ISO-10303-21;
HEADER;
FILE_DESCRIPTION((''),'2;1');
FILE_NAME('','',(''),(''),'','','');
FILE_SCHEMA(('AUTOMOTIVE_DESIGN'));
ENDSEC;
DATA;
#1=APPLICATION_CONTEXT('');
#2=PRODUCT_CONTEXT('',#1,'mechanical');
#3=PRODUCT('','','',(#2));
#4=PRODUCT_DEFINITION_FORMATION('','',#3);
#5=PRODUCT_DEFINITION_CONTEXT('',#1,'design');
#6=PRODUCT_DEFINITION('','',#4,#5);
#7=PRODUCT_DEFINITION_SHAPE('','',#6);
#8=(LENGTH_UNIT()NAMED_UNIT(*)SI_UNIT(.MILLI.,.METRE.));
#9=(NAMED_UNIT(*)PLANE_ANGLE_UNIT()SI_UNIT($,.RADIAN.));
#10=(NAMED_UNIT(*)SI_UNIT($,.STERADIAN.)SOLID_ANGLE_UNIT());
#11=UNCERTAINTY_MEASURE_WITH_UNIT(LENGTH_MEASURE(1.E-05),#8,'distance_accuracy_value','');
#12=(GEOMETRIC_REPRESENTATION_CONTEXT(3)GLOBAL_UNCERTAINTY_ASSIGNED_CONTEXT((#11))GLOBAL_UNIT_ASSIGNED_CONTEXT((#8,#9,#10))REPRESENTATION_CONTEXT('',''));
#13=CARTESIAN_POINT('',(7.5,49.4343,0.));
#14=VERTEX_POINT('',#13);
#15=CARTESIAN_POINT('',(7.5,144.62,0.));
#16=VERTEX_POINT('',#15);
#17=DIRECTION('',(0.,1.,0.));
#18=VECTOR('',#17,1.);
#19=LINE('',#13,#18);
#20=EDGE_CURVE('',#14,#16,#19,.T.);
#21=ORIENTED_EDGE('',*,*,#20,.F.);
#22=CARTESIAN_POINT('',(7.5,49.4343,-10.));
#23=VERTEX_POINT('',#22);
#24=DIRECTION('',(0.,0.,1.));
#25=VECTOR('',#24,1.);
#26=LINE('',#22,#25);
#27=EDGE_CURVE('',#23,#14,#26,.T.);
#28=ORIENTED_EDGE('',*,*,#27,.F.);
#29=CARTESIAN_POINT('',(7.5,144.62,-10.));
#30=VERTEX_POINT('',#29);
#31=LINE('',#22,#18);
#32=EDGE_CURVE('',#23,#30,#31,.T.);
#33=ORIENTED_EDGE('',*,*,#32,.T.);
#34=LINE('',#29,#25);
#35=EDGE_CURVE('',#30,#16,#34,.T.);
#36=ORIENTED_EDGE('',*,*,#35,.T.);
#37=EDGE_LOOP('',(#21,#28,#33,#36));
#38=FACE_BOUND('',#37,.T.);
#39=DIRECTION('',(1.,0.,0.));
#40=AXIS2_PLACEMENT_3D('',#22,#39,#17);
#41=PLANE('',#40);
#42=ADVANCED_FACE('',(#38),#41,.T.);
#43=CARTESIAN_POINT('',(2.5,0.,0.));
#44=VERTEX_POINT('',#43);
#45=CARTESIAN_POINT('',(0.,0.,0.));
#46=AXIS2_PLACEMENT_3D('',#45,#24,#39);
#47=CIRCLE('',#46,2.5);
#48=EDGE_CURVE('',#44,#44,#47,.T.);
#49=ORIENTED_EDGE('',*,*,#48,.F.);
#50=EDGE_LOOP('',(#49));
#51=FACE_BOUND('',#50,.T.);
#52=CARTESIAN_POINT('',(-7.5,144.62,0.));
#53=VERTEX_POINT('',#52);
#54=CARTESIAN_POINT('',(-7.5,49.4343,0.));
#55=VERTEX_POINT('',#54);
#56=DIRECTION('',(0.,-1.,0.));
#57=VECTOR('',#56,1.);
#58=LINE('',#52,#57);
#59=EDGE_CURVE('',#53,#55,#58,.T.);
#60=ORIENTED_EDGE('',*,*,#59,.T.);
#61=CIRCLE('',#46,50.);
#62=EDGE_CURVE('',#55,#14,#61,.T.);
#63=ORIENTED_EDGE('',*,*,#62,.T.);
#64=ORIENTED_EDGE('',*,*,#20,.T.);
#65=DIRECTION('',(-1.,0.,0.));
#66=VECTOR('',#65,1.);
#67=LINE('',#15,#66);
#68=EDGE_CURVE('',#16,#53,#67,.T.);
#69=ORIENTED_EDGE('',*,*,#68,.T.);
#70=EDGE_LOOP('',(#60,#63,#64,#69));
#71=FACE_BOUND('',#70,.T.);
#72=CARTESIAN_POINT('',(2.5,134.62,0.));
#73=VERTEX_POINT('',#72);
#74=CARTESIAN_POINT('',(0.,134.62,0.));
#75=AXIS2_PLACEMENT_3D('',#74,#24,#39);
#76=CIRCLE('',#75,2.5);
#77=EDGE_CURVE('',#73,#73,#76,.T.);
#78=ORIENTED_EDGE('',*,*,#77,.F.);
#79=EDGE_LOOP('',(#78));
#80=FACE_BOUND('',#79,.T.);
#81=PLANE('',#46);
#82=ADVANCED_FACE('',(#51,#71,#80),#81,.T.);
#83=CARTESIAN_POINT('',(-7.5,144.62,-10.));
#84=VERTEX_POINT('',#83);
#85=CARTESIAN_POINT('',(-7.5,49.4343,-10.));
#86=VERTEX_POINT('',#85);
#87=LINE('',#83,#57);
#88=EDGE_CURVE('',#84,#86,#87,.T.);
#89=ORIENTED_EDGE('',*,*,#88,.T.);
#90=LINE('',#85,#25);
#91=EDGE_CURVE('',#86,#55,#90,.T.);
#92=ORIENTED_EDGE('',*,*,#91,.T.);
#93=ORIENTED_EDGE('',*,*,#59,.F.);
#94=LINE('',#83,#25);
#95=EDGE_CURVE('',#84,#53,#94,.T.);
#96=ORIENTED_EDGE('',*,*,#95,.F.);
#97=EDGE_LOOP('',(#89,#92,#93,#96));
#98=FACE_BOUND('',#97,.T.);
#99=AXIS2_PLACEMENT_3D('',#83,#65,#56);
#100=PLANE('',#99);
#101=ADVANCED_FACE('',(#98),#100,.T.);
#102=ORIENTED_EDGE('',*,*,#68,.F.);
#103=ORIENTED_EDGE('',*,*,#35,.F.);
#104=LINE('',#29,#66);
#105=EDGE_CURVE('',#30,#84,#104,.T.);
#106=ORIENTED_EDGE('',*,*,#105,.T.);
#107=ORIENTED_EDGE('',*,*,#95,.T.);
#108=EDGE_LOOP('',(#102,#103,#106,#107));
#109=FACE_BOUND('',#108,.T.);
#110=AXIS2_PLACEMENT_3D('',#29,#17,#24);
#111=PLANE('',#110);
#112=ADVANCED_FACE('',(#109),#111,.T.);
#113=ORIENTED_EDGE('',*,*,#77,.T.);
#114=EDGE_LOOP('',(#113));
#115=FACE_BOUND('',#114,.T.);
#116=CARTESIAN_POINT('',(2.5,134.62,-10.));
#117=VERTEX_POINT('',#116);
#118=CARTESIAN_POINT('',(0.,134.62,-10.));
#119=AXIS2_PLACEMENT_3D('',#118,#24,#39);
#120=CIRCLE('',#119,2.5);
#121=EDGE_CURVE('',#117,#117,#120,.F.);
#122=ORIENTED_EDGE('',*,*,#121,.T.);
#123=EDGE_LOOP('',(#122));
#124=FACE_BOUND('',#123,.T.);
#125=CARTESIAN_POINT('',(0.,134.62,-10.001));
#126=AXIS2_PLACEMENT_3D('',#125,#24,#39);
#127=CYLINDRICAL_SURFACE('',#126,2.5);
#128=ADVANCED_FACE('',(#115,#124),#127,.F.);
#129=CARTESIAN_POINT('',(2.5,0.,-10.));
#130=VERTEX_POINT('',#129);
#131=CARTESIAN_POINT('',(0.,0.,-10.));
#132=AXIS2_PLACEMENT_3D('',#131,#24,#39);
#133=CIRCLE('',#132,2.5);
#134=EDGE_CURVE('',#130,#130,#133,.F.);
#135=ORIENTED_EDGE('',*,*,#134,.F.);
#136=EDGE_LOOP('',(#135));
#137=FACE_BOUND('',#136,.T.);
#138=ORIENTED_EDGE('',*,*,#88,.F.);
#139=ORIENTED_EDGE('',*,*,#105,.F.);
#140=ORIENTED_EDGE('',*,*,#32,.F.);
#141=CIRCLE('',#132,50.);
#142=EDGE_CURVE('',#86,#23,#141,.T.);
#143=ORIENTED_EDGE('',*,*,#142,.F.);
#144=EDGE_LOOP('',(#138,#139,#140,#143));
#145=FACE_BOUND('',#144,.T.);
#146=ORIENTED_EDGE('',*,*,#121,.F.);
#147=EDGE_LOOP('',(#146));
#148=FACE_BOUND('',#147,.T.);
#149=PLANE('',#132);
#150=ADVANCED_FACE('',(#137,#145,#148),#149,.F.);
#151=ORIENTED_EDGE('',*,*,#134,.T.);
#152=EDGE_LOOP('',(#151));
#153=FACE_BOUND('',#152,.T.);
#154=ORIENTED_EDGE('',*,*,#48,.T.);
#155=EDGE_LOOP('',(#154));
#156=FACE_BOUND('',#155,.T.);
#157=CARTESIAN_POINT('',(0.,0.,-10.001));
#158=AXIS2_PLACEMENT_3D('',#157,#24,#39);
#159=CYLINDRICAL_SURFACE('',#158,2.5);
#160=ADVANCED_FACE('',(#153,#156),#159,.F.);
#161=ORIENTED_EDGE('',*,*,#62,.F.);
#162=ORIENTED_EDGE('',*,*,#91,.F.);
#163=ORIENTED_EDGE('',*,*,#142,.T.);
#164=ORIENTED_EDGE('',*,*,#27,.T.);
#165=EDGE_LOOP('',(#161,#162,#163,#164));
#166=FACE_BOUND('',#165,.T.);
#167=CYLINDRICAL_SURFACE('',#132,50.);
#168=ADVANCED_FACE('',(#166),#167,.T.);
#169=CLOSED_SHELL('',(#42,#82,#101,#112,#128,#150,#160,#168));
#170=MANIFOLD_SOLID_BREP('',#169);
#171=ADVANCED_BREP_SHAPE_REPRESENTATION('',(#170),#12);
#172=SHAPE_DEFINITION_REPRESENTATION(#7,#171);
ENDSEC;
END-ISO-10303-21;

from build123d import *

# Parameters (mm, degrees)
BASE_FLANGE1_DEPTH = 10
CUT_EXTRUDE1_REACH = 155.346
SKETCH7_R          = 2.5


# Sheet-metal steps are written as plain solids
with BuildPart() as part:
    # Sketch2 → Base-Flange1 (new body)
    with BuildSketch(Plane.XY):
        with BuildLine():
            Line((7.5, 49.434299833), (7.5, 144.62))
            Line((7.5, 144.62), (-7.5, 144.62))
            Line((-7.5, 144.62), (-7.5, 49.434299833))
            ThreePointArc((-7.5, 49.434299833), (0, -50), (7.5, 49.434299833))
        make_face()
    extrude(amount=-BASE_FLANGE1_DEPTH)

    # Sketch7 → Cut-Extrude1 (cut, up to next)
    with BuildSketch(Plane.XY, mode=Mode.PRIVATE) as cut_extrude1_sk1:
        with Locations((0, 134.62)):
            Circle(SKETCH7_R)
    cut_extrude1_tool1 = extrude(cut_extrude1_sk1.sketch, amount=-CUT_EXTRUDE1_REACH, mode=Mode.PRIVATE) & part.part
    # Sketch7 → Cut-Extrude1 (cut, up to next)
    with BuildSketch(Plane.XY, mode=Mode.PRIVATE) as cut_extrude1_sk2:
        Circle(SKETCH7_R)
    cut_extrude1_tool2 = extrude(cut_extrude1_sk2.sketch, amount=-CUT_EXTRUDE1_REACH, mode=Mode.PRIVATE) & part.part
    add(cut_extrude1_tool1.solids().sort_by_distance((0, 134.62, 0))[0], mode=Mode.SUBTRACT)
    add(cut_extrude1_tool2.solids().sort_by_distance((0, 0, 0))[0], mode=Mode.SUBTRACT)


solid = part.part
